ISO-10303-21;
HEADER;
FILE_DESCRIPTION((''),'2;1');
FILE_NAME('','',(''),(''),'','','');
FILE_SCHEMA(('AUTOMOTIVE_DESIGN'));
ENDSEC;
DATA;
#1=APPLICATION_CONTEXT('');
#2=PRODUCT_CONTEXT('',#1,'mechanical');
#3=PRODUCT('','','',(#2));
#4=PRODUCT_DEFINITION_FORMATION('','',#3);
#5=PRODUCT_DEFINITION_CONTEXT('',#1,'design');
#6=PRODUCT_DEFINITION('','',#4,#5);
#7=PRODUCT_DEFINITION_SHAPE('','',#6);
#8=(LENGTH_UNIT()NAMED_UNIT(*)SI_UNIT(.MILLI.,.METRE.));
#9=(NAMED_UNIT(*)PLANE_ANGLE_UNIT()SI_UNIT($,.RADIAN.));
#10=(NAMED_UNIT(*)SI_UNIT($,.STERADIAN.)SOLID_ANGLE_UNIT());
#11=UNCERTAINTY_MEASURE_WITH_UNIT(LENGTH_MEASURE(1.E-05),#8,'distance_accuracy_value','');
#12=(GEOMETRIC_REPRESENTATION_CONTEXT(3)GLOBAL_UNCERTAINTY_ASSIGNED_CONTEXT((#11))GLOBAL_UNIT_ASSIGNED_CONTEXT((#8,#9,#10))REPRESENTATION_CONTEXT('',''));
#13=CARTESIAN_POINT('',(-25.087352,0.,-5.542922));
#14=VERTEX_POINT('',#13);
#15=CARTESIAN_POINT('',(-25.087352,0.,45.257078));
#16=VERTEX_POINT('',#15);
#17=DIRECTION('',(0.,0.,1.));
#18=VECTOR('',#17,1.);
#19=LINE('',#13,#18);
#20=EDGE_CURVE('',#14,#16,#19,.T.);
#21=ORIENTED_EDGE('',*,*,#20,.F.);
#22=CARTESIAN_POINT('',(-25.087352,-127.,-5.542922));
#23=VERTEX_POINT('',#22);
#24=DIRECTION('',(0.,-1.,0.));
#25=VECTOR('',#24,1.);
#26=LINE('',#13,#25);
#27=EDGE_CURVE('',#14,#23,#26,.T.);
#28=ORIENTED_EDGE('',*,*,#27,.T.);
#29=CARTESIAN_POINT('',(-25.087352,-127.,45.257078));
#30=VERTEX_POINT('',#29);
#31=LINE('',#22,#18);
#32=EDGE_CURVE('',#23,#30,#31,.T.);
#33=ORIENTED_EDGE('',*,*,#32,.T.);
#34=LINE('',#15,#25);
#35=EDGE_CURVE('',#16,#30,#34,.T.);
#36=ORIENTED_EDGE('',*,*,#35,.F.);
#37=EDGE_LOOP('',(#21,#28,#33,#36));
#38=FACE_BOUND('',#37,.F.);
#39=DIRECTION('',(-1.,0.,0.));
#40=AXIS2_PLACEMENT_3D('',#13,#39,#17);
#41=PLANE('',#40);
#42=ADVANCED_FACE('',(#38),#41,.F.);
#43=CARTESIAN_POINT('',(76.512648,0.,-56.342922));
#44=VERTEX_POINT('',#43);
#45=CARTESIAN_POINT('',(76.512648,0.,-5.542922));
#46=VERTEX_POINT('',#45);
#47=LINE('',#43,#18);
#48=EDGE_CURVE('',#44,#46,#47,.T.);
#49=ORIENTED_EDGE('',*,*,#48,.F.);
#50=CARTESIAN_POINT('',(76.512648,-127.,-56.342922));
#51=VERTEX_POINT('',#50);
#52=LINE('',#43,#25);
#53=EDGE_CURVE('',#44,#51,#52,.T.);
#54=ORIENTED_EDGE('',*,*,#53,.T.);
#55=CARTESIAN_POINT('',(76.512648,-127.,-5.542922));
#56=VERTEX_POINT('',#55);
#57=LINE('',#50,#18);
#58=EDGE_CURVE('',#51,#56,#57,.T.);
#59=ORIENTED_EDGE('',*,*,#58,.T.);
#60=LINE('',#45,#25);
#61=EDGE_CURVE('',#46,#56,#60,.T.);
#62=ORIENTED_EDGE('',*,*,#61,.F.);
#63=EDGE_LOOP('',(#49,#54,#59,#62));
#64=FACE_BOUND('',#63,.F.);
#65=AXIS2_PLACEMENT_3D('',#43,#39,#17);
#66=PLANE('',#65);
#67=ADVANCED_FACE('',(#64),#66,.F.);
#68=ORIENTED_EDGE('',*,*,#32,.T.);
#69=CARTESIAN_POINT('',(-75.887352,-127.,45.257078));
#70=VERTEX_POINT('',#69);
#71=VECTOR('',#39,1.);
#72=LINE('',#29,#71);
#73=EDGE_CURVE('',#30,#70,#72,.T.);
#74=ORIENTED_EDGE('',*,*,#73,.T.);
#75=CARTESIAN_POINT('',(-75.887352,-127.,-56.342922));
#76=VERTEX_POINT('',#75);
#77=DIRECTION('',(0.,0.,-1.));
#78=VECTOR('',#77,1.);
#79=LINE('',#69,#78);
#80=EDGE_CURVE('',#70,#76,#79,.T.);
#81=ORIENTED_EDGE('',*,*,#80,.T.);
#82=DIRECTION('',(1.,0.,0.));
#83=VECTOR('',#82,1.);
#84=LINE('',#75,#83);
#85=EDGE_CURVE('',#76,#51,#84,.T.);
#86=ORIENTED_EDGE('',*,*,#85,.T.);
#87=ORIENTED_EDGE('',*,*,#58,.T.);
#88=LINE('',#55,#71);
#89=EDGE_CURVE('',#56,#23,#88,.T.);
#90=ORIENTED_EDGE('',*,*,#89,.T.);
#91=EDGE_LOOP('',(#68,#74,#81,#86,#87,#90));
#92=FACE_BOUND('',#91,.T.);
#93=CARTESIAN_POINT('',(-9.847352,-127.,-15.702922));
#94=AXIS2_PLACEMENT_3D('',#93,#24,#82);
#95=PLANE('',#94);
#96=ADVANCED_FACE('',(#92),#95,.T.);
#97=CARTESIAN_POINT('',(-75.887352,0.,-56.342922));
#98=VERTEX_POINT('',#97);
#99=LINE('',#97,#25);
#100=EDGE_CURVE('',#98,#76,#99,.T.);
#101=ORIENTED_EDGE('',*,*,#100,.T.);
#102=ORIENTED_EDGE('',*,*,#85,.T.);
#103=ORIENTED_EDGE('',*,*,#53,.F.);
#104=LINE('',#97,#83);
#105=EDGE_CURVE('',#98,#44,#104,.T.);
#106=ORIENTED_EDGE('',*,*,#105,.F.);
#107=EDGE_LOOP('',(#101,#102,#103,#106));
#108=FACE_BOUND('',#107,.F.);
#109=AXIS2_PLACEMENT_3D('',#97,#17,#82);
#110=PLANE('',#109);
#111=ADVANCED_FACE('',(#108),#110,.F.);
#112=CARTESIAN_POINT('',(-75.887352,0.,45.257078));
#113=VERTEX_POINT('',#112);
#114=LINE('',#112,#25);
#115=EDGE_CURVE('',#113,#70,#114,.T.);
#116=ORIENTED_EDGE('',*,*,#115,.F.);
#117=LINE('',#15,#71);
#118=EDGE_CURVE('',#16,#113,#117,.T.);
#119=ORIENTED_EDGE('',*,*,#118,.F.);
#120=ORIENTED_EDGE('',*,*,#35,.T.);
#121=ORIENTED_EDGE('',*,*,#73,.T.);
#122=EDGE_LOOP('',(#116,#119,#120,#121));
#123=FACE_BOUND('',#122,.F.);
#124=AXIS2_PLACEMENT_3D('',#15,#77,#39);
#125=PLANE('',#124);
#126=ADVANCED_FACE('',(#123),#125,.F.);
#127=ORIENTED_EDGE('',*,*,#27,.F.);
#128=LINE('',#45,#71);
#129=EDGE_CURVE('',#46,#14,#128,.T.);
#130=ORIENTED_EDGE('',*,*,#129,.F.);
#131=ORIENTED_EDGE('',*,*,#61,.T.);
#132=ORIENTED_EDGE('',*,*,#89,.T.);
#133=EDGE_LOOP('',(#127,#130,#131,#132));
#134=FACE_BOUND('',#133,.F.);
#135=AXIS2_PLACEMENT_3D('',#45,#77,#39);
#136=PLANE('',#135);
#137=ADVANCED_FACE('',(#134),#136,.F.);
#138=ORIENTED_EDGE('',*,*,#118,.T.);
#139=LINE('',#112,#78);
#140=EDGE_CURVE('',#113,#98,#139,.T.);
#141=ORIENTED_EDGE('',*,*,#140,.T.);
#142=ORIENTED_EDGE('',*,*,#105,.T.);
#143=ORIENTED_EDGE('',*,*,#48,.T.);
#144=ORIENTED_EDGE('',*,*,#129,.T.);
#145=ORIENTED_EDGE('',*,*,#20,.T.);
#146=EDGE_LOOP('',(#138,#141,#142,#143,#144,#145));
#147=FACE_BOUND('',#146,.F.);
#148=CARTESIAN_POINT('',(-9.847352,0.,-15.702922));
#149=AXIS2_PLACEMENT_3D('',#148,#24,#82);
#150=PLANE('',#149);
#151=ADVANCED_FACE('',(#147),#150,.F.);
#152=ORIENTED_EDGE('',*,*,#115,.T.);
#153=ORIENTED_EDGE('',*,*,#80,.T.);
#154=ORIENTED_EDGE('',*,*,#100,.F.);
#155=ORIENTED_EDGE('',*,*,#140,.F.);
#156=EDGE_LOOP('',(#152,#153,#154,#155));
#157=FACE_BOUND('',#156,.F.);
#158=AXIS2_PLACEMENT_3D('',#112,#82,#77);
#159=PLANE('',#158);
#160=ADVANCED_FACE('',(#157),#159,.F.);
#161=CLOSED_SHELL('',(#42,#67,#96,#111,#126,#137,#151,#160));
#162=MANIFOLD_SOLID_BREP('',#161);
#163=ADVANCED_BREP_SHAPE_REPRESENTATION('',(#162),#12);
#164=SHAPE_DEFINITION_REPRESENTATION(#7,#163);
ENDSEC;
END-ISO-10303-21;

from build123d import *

# Parameters (mm, degrees)
F1_DEPTH = 127


# Not quite as in the source:
# - a feature names something its author has since deleted; it is built from what else it names


with BuildPart() as f1:
    # F0 (on Front) → F1 (new body)
    with BuildSketch(Plane.XZ):
        Polygon((-75.8873522282, 45.2570778489), (-75.8873522282, -56.3429221511), (76.5126477718, -56.3429221511), (76.5126477718, -5.5429221511), (-25.0873522282, -5.5429221511), (-25.0873522282, 45.2570778489), align=None)
    extrude(amount=F1_DEPTH)


solid = f1.part
